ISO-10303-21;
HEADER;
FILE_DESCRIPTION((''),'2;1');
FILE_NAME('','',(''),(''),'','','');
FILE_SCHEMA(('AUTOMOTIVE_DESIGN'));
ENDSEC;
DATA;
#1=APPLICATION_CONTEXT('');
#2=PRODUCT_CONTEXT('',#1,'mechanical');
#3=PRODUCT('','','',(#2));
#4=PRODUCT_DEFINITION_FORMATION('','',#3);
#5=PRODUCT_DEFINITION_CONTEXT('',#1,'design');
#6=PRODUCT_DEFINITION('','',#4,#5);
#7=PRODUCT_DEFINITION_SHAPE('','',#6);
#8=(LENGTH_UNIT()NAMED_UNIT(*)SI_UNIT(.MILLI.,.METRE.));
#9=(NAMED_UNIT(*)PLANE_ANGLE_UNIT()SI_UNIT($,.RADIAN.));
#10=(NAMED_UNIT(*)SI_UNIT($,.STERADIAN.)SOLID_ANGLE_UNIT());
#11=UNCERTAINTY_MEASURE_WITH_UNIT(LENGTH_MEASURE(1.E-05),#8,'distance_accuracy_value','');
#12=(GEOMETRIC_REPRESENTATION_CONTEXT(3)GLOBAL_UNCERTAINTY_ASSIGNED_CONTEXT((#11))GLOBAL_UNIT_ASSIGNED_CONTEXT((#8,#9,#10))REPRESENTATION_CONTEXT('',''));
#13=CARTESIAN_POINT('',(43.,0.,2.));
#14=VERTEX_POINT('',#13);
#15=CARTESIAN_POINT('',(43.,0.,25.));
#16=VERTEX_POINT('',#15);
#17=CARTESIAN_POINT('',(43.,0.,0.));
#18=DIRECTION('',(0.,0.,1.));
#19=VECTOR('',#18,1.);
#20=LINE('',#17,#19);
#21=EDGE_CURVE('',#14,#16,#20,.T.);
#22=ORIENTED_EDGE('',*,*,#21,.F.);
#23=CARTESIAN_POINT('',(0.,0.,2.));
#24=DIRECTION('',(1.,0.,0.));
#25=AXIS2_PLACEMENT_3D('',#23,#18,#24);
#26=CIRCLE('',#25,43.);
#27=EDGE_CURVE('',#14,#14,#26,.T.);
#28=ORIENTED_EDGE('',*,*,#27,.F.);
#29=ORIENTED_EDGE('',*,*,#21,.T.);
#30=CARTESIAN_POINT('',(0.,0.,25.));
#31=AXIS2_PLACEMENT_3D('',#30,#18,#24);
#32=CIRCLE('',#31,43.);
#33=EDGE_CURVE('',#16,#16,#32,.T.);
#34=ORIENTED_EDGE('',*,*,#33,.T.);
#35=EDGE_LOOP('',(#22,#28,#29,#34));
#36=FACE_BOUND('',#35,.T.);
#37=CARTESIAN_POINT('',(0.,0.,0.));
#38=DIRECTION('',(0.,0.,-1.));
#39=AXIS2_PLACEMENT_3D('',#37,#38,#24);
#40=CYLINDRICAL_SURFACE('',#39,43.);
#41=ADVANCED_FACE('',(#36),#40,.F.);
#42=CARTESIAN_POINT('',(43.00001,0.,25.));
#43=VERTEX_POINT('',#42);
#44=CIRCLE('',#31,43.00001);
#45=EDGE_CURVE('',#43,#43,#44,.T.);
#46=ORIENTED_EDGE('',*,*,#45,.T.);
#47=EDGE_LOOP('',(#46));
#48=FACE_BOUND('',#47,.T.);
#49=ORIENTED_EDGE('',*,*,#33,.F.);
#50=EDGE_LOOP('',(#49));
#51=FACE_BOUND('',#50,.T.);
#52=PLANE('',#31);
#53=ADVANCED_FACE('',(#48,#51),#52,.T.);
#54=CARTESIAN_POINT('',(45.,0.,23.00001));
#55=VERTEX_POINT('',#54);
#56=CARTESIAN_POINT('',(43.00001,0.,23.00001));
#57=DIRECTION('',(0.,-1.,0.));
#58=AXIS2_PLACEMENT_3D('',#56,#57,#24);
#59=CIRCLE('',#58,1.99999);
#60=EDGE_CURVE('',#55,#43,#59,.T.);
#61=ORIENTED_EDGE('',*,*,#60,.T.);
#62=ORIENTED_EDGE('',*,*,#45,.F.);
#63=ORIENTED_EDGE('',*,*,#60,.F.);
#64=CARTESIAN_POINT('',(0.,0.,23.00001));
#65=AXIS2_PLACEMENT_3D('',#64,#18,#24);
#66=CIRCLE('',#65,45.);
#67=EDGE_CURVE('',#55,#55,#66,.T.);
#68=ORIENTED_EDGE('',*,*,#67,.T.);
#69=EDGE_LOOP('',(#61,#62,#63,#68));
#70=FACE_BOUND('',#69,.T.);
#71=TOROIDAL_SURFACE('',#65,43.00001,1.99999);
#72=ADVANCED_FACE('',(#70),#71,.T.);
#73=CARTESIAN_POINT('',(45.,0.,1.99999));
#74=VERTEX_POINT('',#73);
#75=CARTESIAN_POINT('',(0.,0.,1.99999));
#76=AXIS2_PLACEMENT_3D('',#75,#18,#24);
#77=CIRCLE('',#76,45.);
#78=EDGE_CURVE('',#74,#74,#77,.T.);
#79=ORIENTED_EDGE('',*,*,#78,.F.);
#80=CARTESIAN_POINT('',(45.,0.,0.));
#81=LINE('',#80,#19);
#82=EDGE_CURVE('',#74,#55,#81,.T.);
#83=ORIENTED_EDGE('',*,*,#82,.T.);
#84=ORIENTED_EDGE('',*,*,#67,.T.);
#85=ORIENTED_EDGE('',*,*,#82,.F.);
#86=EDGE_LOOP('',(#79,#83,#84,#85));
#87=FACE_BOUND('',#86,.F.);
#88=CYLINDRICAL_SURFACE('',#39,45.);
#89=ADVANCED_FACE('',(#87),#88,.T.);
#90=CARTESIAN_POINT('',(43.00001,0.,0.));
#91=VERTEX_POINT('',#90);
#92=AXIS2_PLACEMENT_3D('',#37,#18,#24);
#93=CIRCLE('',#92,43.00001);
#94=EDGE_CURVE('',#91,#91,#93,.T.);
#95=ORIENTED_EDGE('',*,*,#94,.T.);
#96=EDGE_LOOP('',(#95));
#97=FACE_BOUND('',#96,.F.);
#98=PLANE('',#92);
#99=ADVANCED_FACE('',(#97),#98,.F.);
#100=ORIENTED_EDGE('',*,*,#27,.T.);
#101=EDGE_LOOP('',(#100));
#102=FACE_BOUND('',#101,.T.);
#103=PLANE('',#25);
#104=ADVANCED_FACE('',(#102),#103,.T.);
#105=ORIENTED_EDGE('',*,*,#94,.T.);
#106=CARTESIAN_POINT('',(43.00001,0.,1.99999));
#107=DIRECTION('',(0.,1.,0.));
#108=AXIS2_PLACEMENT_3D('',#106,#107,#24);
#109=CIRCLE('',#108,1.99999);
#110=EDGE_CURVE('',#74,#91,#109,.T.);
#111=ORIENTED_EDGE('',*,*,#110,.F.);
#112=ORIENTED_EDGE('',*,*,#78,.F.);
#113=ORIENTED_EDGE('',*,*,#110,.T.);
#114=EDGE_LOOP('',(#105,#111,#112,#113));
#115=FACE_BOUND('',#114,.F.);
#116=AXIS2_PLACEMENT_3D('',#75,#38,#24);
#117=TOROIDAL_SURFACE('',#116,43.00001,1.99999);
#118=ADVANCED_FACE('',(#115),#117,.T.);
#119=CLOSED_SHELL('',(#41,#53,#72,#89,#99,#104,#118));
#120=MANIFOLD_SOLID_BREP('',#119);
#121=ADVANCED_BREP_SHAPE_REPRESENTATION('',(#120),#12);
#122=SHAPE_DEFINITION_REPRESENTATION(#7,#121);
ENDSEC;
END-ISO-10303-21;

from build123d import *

# Parameters (mm, degrees)
F0_R     = 43
F1_DEPTH = 2
F0_R_2   = 45
F2_DEPTH = 25
F3_R     = 1.99999


# Not quite as in the source:
# - a fillet or chamfer is up to 0.001 mm smaller than in the source, because OpenCascade refuses the exact size


with BuildPart() as f1:
    # F0 (on Top) → F1 (new body)
    with BuildSketch(Plane.XY):
        Circle(F0_R)
    extrude(amount=F1_DEPTH)

    # F0 (on Top) → F2 (join)
    with BuildSketch(Plane.XY):
        Circle(F0_R_2)
        Circle(F0_R, mode=Mode.SUBTRACT)
    extrude(amount=F2_DEPTH)

    # F3 (radius 2 in the source; OpenCascade refuses exactly that, so slightly less here)
    f3_edges = [f1.edges().sort_by_distance(p)[0] for p in [
        (-45, 0, 0),
        (-45, 0, 25),
    ]]
    fillet(f3_edges, radius=F3_R)


solid = f1.part
